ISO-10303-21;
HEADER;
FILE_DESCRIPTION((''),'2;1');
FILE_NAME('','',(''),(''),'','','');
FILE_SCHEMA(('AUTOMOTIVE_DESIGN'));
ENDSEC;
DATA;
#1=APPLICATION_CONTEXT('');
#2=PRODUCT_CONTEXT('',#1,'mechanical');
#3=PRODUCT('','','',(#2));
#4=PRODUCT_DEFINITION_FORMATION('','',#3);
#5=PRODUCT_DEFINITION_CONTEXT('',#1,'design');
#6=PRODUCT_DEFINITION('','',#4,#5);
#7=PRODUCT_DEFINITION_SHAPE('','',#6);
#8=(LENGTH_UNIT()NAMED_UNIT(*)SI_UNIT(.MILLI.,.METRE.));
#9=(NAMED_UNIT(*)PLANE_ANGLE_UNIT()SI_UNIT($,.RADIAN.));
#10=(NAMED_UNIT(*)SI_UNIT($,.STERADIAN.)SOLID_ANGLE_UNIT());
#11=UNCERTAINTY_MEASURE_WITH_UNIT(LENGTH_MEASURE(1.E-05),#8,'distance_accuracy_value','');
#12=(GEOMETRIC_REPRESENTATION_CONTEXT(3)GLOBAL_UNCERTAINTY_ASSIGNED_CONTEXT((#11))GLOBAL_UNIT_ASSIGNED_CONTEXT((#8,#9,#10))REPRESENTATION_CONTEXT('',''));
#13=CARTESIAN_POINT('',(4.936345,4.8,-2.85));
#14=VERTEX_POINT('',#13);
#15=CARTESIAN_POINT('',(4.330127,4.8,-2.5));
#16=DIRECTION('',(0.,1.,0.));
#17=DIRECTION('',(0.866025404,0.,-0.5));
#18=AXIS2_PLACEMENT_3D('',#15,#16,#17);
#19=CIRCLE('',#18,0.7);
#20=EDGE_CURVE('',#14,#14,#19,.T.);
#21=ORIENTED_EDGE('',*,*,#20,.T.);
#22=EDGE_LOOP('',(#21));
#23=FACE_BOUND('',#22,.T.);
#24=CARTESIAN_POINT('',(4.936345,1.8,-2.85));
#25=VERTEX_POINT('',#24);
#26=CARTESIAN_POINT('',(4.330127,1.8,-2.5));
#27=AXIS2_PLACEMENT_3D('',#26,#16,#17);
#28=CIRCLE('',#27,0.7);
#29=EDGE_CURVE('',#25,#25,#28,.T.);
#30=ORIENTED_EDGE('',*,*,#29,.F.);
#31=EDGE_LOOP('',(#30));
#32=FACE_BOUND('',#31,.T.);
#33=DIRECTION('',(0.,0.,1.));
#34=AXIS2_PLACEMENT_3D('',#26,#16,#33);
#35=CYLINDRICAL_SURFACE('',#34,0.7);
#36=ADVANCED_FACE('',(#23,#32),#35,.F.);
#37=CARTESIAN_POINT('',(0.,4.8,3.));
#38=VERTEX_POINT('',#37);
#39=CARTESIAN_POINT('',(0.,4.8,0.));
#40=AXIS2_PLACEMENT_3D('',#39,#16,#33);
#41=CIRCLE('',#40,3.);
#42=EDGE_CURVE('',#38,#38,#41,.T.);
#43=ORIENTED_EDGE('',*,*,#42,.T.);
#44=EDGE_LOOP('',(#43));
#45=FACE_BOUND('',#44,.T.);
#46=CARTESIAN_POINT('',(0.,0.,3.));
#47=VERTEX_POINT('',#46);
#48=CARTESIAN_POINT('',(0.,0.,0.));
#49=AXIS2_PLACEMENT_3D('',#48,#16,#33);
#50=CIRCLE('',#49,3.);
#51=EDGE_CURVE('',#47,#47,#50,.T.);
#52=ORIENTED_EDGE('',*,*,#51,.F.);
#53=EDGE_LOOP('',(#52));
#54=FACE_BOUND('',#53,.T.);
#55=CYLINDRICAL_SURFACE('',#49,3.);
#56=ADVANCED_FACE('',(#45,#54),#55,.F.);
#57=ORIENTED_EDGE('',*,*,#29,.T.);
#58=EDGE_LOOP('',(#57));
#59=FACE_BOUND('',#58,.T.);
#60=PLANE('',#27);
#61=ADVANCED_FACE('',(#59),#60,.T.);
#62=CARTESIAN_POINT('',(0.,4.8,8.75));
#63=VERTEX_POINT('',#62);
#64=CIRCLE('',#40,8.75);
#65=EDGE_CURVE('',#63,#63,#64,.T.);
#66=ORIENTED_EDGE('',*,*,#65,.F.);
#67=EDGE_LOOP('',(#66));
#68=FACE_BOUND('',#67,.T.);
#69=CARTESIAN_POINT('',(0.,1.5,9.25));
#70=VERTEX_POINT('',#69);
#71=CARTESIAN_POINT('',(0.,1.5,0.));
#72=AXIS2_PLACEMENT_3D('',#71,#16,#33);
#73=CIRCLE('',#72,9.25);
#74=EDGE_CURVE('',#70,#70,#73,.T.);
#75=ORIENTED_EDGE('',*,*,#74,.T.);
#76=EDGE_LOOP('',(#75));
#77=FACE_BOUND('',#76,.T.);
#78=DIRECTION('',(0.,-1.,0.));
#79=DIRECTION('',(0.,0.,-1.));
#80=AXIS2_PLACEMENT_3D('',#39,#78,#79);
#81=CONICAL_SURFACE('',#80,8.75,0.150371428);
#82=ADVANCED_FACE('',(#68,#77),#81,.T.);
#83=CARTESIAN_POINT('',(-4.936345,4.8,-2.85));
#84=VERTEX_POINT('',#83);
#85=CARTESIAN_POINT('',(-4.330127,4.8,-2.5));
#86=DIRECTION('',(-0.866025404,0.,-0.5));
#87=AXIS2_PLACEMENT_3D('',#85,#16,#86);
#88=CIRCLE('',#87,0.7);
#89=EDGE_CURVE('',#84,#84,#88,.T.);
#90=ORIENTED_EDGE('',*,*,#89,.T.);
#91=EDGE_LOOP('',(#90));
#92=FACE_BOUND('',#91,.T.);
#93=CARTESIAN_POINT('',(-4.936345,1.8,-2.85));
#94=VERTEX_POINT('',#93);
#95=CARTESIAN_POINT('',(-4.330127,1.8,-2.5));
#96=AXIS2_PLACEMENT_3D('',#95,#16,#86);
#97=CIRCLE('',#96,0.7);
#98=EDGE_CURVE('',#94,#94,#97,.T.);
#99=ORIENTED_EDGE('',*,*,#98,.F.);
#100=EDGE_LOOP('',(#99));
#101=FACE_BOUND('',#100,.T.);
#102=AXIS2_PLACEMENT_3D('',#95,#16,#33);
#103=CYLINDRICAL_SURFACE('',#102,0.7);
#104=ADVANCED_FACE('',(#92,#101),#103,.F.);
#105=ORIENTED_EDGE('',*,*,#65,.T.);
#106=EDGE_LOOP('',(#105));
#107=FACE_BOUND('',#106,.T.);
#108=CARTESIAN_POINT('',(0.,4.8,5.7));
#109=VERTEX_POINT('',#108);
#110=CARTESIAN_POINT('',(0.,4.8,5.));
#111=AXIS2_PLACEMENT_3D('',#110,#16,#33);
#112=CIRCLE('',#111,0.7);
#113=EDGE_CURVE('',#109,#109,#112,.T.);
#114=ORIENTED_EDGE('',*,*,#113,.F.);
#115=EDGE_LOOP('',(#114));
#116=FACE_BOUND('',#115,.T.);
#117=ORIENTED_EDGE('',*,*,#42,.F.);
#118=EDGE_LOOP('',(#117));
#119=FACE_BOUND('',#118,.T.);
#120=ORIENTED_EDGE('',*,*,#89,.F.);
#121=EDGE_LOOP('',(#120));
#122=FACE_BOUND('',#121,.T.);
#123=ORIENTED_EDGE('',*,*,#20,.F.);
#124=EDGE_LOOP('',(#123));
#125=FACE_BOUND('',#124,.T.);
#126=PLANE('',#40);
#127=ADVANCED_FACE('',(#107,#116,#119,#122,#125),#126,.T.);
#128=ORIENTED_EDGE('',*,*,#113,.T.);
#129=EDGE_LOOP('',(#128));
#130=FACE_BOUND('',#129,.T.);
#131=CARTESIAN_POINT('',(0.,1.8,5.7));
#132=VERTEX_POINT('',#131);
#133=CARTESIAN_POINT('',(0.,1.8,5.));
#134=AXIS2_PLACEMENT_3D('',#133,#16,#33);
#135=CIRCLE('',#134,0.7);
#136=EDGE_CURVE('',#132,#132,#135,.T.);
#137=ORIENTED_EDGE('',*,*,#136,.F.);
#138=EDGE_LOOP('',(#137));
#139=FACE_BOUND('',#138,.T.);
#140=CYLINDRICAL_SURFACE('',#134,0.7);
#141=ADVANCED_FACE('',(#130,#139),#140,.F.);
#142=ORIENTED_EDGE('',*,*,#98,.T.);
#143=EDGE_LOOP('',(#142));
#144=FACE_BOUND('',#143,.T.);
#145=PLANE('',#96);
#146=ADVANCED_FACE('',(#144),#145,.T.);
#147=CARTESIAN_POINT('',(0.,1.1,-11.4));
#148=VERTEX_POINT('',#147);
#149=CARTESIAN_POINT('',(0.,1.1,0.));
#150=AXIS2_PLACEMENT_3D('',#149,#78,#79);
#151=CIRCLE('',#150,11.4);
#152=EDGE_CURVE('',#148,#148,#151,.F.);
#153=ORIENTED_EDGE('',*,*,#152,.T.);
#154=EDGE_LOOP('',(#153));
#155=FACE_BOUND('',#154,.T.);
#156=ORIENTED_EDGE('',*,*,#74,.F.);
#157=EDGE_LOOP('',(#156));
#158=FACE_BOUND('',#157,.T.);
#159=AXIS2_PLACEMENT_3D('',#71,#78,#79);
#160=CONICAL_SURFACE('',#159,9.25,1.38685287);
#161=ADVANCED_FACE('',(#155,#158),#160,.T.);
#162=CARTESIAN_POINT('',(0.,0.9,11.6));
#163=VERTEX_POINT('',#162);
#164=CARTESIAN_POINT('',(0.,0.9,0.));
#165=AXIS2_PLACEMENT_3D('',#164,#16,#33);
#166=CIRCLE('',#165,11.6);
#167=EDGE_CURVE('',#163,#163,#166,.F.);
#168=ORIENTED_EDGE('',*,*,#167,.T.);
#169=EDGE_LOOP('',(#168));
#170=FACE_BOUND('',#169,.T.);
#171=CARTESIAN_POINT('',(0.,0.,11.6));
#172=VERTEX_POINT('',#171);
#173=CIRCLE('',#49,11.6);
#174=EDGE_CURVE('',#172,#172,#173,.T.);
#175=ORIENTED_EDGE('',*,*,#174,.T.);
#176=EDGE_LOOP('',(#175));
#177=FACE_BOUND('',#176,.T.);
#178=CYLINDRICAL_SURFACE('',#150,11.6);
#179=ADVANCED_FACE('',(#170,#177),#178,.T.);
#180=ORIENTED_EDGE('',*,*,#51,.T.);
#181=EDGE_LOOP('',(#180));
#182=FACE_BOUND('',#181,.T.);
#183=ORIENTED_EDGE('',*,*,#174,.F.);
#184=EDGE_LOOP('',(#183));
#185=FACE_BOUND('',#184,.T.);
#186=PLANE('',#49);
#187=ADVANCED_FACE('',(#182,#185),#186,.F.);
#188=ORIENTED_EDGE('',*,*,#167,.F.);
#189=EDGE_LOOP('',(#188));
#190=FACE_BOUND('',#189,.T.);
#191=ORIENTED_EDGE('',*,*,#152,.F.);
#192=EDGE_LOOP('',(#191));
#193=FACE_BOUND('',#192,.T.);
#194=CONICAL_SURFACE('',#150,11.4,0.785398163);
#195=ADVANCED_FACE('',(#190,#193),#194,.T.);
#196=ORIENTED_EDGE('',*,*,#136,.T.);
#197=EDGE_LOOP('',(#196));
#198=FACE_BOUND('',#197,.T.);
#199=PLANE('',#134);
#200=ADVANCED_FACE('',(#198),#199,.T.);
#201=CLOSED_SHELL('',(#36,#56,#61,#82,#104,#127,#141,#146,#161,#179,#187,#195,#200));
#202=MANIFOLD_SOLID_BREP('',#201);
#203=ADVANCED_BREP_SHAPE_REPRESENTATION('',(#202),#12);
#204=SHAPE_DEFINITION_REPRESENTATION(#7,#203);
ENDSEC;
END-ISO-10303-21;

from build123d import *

# Parameters (mm, degrees)
SKETCH_4_R               = 11.6
SKETCH_4_R_2             = 1.1
EXTRUDE_1_DEPTH          = 1.1
EXTRUDE_START            = 1.5
SKETCH_4_3_R             = 9.25
SKETCH_4_3_R_2           = 1.1
EXTRUDE_2_DEPTH          = 3.3
CHAMFER_1_SIZE           = 0.2
SKETCH_6_R               = 3
CUT_EXTRUDE_1_DEPTH      = 18.092688495
SKETCH_7_R               = 0.7
CUT_EXTRUDE_2_DEPTH      = 3
PATTERN_CIRCULAR_1_COUNT = 3
CHAMFER_2_SIZE           = 3.3
CHAMFER_2_SIZE_2         = 0.5


with BuildPart() as part:
    # 草图4 → 凸台-拉伸1 (new body)
    with BuildSketch(Plane(origin=(0, 0, 0), x_dir=(1, 0, 0), z_dir=(0, 1, 0))):
        with Locations(Location((0, 0, 0), (0, 0, 270))):
            Circle(SKETCH_4_R)
        with Locations(Location((0, 0, 0), (0, 0, 270))):
            Circle(SKETCH_4_R_2, mode=Mode.SUBTRACT)
    extrude(amount=EXTRUDE_1_DEPTH)

    # 倒角1
    chamfer_1_edges = [part.edges().sort_by_distance(p)[0] for p in [
        (0, 1.1, -11.6),
    ]]
    chamfer(chamfer_1_edges, length=CHAMFER_1_SIZE)


with BuildPart() as body_2:
    # 草图4<3> → 凸台-拉伸2 (new body)
    with BuildSketch(Plane(origin=(0, 0, 0), x_dir=(1, 0, 0), z_dir=(0, 1, 0)).offset(EXTRUDE_START)):
        with Locations(Location((0, 0, 0), (0, 0, 270))):
            Circle(SKETCH_4_3_R)
        with Locations(Location((0, 0, 0), (0, 0, 270))):
            Circle(SKETCH_4_3_R_2, mode=Mode.SUBTRACT)
    extrude(amount=EXTRUDE_2_DEPTH)


    add(part.part)  # loft_1 joins it to this body
    # loft up to a face of the part (loft_1)
    loft([Face(Wire([body_2.edges().sort_by_distance((-6.742959804, 1.5, -6.33206073))[0]])), Face(Wire([body_2.edges().sort_by_distance((8.310242353, 1.1, -7.803837008))[0]]))])

    # 草图6 → 切除-拉伸1 (cut, through all)
    with BuildSketch(Plane(origin=(0, 4.8, 0), x_dir=(1, 0, 0), z_dir=(0, 1, 0))):
        with Locations(Location((0, 0, 0), (0, 0, 270))):
            Circle(SKETCH_6_R)
    extrude(amount=-CUT_EXTRUDE_1_DEPTH, mode=Mode.SUBTRACT)

    # 草图7 → 切除-拉伸2 (cut)
    with BuildSketch(Plane(origin=(0, 4.8, 0), x_dir=(1, 0, 0), z_dir=(0, 1, 0))):
        with Locations(Location((0, -5, 0), (0, 0, 270))):
            Circle(SKETCH_7_R)
    cut_extrude_2 = extrude(amount=-CUT_EXTRUDE_2_DEPTH, mode=Mode.SUBTRACT)

    # 阵列(圆周)1: 切除-拉伸2 ×3 about axis
    pattern_circular_1_axis = Axis((0, 0, 0), (0, 1, 0))
    for i in range(1, PATTERN_CIRCULAR_1_COUNT):
        add(cut_extrude_2.rotate(pattern_circular_1_axis, i * 360 / PATTERN_CIRCULAR_1_COUNT), mode=Mode.SUBTRACT)

    # 倒角2
    # the kernel refuses this chamfer: 3.3, 0.5 mm, written as the material it takes off along each edge
    with BuildSketch(Plane(origin=(0, 4.8, 0), x_dir=(0, 0, 1), z_dir=(-1, 0, 0))) as chamfer_2_piece_1:
        Polygon((9.25, -CHAMFER_2_SIZE), (9.25 - CHAMFER_2_SIZE_2, 0), (9.25, 0), align=None)
    revolve(axis=Axis((0, 4.8, 0), (0, 1, 0)), mode=Mode.SUBTRACT)


solid = body_2.part
